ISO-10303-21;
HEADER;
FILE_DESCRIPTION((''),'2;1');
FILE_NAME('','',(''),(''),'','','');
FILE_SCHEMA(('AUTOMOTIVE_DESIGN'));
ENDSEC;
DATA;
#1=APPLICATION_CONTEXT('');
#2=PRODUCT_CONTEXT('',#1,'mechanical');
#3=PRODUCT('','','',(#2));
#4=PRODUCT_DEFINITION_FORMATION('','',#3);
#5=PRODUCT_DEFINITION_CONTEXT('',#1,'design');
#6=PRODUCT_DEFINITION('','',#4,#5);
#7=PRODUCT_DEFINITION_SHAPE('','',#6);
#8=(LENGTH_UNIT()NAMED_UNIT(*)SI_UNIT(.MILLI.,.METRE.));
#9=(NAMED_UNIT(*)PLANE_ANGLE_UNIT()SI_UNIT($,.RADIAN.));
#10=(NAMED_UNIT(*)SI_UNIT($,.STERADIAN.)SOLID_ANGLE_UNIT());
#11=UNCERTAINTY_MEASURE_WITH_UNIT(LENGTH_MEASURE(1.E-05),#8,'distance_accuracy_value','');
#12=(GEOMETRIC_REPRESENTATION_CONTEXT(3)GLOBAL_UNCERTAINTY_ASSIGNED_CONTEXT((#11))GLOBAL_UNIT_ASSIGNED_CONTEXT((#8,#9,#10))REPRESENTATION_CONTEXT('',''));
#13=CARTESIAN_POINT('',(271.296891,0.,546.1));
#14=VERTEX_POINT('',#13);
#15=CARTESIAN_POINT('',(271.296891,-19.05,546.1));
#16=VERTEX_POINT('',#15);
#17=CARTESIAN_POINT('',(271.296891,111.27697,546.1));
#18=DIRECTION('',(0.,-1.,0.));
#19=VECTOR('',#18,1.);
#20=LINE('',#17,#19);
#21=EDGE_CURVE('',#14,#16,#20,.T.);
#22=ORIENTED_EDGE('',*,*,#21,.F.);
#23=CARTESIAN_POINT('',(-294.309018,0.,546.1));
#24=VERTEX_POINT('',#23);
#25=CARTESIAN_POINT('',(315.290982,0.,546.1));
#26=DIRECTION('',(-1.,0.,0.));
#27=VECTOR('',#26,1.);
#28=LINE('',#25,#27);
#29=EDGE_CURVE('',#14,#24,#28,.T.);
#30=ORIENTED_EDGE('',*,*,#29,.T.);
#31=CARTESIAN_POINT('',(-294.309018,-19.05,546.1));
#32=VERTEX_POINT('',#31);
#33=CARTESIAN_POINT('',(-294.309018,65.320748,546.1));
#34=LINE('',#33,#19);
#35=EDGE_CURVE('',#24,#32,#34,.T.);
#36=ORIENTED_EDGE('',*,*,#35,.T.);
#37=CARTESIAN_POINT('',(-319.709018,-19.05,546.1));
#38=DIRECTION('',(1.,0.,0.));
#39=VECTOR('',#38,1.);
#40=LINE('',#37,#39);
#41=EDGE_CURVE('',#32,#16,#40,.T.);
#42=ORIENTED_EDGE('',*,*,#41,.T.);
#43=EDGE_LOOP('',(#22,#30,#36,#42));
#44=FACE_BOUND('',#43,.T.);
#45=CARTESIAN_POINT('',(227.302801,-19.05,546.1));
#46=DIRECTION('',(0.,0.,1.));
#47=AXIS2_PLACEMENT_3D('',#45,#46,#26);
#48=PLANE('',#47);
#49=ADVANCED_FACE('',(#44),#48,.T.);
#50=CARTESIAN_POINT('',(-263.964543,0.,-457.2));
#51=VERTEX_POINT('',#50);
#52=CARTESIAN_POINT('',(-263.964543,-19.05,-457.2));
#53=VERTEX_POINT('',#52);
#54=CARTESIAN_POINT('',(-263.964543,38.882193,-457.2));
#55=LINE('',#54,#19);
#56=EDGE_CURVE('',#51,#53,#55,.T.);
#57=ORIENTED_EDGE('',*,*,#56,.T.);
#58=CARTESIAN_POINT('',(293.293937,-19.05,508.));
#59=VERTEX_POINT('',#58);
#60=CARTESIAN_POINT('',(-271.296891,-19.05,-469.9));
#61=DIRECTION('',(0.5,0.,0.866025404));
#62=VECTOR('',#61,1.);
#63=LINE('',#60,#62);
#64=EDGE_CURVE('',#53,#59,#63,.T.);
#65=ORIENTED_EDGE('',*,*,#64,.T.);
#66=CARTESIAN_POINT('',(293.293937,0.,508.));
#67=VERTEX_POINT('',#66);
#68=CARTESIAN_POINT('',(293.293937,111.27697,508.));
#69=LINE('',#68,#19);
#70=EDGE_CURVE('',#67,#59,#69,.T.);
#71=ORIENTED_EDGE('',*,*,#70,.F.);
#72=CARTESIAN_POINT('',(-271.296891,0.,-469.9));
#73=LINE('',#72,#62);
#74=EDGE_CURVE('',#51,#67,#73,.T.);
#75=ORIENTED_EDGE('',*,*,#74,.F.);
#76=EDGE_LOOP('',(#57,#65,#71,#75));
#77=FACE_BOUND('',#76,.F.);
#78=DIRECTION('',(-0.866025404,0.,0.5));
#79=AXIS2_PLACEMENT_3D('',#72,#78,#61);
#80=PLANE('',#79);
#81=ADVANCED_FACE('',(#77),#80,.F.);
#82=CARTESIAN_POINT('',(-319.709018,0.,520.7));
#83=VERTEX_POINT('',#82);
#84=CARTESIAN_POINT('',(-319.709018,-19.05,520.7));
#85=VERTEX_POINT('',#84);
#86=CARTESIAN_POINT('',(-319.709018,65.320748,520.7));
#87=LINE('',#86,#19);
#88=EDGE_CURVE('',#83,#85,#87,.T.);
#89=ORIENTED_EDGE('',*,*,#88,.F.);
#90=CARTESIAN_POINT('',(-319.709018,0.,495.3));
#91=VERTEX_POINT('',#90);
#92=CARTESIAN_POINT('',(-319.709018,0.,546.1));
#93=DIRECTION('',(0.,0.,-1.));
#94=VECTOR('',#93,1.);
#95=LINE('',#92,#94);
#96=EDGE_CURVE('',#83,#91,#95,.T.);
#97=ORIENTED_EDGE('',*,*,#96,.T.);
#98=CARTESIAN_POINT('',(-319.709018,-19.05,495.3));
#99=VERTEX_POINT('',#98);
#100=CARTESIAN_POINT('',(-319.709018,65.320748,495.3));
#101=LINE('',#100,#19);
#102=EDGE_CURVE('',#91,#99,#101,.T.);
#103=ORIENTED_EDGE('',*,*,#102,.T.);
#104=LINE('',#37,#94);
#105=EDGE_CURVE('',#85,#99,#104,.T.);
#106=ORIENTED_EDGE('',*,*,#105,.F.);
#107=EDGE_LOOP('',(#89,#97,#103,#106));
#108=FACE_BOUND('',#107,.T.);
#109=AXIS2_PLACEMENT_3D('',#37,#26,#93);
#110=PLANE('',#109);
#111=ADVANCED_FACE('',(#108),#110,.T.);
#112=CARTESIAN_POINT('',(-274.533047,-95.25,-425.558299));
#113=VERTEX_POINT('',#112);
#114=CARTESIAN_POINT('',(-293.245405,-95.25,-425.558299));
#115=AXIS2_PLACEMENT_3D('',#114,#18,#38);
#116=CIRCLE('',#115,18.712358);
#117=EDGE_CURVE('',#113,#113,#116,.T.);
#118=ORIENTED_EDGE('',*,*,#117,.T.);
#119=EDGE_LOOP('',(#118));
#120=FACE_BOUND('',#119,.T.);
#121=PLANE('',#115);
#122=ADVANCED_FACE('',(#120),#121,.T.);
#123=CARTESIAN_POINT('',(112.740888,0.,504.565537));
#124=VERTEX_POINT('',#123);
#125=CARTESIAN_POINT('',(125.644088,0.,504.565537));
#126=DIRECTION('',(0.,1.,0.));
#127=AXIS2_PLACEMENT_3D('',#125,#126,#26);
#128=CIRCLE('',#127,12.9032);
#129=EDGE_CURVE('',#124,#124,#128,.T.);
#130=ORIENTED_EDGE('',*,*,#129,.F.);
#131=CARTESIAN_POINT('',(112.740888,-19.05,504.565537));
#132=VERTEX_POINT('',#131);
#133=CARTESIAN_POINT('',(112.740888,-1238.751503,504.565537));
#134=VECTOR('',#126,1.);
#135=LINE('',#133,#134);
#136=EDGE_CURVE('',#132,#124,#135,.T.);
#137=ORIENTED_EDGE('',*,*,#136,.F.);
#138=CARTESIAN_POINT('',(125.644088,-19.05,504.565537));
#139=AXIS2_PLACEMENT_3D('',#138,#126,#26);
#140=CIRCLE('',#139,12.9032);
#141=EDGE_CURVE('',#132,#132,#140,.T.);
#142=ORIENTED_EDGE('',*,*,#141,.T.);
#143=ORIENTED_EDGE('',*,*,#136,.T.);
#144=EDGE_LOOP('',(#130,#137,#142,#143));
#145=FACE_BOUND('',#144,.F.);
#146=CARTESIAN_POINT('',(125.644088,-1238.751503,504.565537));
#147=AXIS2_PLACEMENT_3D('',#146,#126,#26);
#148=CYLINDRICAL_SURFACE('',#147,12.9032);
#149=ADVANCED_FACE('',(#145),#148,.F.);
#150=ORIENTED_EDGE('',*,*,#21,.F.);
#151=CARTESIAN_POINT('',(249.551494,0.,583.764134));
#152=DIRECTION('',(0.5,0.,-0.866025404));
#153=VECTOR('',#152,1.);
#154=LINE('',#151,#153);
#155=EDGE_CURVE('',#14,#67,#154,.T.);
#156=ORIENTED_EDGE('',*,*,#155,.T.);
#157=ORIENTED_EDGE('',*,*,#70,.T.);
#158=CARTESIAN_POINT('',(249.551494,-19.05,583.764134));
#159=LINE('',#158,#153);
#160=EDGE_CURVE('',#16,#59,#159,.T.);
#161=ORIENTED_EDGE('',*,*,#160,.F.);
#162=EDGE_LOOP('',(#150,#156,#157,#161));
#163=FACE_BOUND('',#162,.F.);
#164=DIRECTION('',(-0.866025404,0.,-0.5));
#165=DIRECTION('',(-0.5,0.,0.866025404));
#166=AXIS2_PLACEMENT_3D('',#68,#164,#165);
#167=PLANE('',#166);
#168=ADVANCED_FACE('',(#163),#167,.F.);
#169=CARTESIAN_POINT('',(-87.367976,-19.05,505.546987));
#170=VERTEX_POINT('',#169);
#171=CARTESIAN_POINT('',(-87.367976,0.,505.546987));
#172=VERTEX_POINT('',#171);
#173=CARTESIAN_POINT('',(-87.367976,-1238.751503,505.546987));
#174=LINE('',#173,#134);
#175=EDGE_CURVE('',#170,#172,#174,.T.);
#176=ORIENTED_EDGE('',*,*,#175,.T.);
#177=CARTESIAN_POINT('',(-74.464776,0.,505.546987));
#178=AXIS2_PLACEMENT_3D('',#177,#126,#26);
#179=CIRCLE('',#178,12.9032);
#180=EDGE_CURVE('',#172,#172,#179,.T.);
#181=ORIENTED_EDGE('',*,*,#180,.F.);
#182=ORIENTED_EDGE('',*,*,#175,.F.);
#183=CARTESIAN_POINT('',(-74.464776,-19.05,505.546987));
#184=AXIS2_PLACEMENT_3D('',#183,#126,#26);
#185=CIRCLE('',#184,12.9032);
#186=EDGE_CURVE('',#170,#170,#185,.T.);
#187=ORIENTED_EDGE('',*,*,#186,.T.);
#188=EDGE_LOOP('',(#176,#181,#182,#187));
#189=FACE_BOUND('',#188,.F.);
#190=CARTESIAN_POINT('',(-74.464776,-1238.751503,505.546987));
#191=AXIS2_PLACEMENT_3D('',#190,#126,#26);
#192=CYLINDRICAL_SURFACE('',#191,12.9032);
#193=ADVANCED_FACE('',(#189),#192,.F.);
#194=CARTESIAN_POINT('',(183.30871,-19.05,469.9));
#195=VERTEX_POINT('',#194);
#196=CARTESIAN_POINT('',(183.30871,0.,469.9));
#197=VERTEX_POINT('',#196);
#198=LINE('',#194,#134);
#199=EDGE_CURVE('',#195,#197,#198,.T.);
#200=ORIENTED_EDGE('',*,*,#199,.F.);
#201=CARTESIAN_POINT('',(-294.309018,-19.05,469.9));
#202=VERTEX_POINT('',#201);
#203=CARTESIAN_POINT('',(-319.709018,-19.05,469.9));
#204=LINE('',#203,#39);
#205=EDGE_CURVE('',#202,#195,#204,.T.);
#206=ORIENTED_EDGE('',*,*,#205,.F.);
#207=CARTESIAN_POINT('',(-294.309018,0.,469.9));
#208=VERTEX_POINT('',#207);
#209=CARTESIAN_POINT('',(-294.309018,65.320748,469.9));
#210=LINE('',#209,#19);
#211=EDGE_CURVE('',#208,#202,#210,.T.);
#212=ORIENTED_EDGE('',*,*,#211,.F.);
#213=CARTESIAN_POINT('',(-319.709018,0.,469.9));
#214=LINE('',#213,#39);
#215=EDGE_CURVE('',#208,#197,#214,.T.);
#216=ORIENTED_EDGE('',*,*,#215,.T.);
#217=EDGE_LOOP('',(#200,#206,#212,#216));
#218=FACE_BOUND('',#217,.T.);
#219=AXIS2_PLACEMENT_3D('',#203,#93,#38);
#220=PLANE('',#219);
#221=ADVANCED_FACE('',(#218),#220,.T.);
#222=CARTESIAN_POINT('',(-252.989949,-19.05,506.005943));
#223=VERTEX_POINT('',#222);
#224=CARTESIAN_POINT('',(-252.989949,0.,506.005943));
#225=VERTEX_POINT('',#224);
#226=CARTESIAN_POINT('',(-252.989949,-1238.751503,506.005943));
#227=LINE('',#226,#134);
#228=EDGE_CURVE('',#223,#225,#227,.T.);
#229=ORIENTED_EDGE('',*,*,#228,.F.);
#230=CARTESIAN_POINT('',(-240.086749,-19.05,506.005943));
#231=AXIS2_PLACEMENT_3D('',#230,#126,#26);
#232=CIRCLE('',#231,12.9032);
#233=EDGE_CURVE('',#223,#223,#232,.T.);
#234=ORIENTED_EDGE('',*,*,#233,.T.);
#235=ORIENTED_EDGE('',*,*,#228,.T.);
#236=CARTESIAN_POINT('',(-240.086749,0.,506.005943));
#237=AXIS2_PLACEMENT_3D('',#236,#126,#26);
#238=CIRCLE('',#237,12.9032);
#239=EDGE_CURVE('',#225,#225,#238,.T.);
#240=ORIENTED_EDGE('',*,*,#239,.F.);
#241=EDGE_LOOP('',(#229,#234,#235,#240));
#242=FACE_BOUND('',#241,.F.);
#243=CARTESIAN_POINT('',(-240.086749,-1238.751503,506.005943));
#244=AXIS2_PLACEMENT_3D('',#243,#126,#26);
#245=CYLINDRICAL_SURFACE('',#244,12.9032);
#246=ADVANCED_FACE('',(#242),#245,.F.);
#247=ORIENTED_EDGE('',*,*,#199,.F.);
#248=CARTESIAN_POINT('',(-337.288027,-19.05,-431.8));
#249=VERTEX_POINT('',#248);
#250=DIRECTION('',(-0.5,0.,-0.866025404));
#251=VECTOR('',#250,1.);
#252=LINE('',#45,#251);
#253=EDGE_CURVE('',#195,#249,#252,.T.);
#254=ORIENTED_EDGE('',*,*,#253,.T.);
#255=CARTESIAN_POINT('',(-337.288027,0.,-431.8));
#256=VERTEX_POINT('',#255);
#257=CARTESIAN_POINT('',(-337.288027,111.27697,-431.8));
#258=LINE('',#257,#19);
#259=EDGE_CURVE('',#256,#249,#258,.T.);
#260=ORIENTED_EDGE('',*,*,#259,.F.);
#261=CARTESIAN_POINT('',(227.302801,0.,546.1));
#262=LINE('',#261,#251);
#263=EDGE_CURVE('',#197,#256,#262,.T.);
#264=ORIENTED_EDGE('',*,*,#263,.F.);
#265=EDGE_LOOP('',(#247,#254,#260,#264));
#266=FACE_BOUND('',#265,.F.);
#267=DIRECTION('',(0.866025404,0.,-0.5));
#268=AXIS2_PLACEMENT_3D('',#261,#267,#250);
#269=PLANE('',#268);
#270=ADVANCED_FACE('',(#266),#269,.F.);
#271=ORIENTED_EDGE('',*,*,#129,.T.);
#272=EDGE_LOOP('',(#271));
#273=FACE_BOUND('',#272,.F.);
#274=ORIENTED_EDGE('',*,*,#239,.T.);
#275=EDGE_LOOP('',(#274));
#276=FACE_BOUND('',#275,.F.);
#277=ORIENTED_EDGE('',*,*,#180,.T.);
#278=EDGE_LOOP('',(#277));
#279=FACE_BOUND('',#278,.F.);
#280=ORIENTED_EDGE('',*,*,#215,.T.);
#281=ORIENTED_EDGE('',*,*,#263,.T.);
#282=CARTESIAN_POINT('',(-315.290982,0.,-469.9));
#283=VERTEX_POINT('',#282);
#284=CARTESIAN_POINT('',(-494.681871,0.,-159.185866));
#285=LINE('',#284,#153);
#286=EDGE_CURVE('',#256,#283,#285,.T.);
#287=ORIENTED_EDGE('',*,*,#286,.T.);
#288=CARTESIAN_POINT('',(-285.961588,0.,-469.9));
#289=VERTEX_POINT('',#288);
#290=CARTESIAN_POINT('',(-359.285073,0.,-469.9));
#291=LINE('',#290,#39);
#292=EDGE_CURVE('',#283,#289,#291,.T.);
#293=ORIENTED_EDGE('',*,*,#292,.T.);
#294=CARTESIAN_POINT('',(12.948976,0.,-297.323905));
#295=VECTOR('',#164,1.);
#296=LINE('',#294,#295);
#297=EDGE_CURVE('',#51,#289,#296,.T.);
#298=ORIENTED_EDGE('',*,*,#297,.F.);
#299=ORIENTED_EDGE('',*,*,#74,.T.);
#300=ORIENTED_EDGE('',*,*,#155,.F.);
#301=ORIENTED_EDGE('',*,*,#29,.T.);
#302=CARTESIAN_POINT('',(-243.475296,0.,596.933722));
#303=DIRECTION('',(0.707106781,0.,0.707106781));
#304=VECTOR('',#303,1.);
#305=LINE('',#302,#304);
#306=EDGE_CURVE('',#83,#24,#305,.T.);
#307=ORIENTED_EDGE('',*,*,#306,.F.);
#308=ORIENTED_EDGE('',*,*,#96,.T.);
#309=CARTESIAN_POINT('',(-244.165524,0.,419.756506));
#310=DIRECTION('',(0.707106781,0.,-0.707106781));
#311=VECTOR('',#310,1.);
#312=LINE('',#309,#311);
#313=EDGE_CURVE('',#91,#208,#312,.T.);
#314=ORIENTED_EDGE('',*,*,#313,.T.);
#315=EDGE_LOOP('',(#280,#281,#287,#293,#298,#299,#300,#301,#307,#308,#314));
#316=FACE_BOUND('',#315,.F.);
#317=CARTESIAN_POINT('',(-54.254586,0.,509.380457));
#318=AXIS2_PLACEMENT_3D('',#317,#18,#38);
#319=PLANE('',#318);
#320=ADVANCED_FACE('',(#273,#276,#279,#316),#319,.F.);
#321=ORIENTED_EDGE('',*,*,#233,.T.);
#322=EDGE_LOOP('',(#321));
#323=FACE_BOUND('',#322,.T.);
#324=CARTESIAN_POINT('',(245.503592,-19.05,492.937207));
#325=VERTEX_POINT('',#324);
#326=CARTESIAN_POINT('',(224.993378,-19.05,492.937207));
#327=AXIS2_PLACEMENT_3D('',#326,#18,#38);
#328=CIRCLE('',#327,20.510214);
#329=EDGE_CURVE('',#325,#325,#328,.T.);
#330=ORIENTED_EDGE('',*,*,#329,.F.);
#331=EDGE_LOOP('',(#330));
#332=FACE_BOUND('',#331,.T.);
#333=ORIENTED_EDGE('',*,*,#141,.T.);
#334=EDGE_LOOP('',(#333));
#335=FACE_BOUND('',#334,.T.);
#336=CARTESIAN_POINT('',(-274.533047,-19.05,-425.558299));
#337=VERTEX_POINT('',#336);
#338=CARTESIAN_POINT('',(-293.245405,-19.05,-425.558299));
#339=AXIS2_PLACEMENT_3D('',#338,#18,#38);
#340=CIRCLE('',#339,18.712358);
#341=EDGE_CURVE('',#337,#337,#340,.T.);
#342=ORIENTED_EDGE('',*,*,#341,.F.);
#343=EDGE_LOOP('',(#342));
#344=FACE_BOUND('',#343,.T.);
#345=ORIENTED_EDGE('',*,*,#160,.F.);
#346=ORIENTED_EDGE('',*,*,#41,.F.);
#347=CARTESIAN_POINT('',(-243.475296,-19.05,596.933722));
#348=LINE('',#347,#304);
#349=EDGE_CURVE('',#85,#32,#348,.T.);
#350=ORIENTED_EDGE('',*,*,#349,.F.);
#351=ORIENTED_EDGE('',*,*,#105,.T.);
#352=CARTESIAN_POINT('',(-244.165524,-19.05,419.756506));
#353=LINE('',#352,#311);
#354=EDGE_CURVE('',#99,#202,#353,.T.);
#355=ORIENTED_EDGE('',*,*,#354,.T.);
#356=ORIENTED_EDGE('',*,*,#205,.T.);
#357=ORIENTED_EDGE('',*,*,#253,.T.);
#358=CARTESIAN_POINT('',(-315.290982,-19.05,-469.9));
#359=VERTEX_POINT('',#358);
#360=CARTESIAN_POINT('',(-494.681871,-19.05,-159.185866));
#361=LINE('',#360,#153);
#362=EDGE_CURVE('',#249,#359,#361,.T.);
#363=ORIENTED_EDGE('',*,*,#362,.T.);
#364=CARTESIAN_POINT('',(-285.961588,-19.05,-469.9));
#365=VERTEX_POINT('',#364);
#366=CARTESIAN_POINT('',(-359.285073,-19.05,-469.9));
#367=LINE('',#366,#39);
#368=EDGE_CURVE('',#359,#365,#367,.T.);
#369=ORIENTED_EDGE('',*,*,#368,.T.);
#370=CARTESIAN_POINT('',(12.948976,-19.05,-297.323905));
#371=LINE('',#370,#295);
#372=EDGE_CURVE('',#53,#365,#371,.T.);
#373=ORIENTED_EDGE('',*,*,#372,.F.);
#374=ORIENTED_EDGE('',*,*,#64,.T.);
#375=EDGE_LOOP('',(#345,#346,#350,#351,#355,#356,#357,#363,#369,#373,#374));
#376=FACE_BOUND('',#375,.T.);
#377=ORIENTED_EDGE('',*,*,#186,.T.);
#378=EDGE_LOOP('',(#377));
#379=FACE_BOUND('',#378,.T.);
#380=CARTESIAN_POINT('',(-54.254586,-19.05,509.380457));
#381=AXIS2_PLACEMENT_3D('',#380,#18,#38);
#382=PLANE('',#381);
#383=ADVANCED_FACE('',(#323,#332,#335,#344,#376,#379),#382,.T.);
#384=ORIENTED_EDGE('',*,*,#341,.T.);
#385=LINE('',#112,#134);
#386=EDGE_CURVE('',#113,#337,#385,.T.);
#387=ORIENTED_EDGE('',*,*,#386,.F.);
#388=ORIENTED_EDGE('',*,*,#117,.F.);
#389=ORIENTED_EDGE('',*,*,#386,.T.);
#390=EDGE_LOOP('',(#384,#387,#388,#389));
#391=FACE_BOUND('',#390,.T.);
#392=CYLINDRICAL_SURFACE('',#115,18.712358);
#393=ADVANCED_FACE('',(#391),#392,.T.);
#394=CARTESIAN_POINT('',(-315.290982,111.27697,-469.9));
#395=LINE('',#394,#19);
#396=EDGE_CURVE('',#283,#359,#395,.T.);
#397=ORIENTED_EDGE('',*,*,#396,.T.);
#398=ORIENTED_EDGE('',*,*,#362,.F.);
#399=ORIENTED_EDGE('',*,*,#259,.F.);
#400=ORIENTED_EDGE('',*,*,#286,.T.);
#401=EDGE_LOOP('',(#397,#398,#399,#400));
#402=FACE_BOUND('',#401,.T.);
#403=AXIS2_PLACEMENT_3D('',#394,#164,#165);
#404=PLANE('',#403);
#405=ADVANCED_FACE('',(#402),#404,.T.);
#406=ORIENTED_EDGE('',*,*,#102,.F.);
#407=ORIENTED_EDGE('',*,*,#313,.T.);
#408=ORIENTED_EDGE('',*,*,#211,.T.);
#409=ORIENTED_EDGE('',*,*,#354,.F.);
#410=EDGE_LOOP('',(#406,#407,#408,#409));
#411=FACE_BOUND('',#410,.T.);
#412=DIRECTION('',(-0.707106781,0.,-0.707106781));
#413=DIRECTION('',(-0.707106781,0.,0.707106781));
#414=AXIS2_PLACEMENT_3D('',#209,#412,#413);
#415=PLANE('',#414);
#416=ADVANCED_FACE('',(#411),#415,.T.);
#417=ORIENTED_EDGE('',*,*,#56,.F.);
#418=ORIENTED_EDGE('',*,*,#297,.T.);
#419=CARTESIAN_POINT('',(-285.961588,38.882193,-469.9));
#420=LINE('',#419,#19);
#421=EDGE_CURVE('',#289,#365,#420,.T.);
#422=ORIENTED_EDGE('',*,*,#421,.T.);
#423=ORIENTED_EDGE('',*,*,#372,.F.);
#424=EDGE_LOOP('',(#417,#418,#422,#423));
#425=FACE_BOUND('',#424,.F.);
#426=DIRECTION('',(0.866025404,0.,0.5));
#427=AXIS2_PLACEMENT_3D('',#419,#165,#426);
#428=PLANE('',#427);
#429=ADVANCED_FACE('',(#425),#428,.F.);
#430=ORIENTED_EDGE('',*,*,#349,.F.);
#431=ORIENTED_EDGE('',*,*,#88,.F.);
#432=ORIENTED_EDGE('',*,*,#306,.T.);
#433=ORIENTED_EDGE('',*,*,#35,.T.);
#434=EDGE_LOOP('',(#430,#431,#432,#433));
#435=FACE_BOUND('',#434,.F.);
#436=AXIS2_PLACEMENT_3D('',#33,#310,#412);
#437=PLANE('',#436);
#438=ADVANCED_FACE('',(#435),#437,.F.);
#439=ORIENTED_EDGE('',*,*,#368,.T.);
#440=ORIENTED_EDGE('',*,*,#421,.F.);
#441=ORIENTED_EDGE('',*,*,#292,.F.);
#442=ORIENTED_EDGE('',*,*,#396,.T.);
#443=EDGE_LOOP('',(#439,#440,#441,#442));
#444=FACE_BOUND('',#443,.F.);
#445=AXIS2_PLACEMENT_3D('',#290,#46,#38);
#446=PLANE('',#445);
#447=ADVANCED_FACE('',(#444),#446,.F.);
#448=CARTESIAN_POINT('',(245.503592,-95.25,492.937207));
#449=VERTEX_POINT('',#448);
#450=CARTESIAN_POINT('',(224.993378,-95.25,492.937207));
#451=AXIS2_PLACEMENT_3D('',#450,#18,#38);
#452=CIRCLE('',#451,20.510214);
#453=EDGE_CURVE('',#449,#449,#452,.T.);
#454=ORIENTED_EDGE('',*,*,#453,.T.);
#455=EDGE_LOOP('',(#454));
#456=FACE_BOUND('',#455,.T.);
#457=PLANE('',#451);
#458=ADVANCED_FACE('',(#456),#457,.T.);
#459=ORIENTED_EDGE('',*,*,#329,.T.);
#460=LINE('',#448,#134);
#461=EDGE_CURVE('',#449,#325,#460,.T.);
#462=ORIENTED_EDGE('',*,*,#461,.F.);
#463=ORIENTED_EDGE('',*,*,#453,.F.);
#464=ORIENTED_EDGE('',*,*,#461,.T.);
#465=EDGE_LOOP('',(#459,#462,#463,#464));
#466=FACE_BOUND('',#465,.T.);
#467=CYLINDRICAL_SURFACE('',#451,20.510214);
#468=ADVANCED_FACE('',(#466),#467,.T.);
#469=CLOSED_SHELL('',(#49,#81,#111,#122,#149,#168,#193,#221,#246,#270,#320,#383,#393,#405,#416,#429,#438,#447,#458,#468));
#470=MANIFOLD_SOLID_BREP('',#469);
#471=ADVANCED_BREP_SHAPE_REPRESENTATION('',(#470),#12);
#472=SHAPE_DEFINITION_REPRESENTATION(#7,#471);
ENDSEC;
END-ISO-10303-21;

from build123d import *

# Parameters (mm, degrees)
F1_DEPTH    = 19.05
F3_DEPTH    = 19.05
F5_D        = 25.8064
F7_R        = 20.5102138496
F7_R_2      = 18.7123578019
F8_DEPTH    = 76.2
F9_T1_DEPTH = 149.6914957887
F9_T3_DEPTH = 96.8143860217
F9_T5_DEPTH = 241.603940201


# Not quite as in the source:
# - a fillet or chamfer that OpenCascade refuses, or shapes differently, is made with other operations: its cross-section is extruded or revolved along the edge and cut away or added


with BuildPart() as f1:
    # F0 (on Front) → F1 (new body)
    with BuildSketch(Plane.XZ):
        Polygon((315.2909820045, 546.1), (227.30280098, 546.1), (-359.2850725167, -469.9), (-271.2968914922, -469.9), align=None)
    extrude(amount=F1_DEPTH)

    # F2 (on face) → F3 (join, through all)
    with BuildSketch(Plane.XZ.offset(19.05)):
        Polygon((227.30280098, 546.1), (-319.7090179955, 546.1), (-319.7090179955, 469.9), (183.3087104677, 469.9), align=None)
    extrude(amount=-F3_DEPTH)

    # F5 (through all)
    with Locations(Plane.XZ.offset(19.05)):
        with Locations((-240.0867491961, 506.0059428215), (-74.4647756219, 505.5469870567), (125.6440877914, 504.5655369759)):
            Hole(F5_D / 2)

    # F7 (on offset) → F8 (join, through all)
    with BuildSketch(Plane.XZ.offset(95.25)):
        with Locations((224.993377924, 492.937207222)):
            Circle(F7_R)
        with Locations((-293.2454049587, -425.5582988262)):
            Circle(F7_R_2)
    extrude(amount=-F8_DEPTH)

    # F9: chamfer of 25.4 on 5 edges, made by hand

    # F9_s2 → F9_t1 (cut)
    with BuildSketch(Plane.XZ.offset(-65.3207478943)):
        Polygon((-294.3090179955, 546.1), (-319.7090179955, 520.7), (-319.7090179955, 546.1), align=None)
        Polygon((-294.3090179955, 469.9), (-319.7090179955, 495.3), (-319.7090179955, 469.9), align=None)
    extrude(amount=F9_T1_DEPTH, mode=Mode.SUBTRACT)

    # F9_s4 → F9_t3 (cut)
    with BuildSketch(Plane.XZ.offset(-38.8821930109)):
        Polygon((-285.9615883296, -469.9), (-263.9645430735, -457.2), (-271.2968914922, -469.9), align=None)
    extrude(amount=F9_T3_DEPTH, mode=Mode.SUBTRACT)

    # F9_s6 → F9_t5 (cut)
    with BuildSketch(Plane.XZ.offset(-111.2769701005)):
        Polygon((293.2939367483, 508), (271.2968914922, 546.1), (315.2909820045, 546.1), align=None)
        Polygon((-315.2909820045, -469.9), (-337.2880272606, -431.8), (-359.2850725167, -469.9), align=None)
    extrude(amount=F9_T5_DEPTH, mode=Mode.SUBTRACT)


solid = f1.part
